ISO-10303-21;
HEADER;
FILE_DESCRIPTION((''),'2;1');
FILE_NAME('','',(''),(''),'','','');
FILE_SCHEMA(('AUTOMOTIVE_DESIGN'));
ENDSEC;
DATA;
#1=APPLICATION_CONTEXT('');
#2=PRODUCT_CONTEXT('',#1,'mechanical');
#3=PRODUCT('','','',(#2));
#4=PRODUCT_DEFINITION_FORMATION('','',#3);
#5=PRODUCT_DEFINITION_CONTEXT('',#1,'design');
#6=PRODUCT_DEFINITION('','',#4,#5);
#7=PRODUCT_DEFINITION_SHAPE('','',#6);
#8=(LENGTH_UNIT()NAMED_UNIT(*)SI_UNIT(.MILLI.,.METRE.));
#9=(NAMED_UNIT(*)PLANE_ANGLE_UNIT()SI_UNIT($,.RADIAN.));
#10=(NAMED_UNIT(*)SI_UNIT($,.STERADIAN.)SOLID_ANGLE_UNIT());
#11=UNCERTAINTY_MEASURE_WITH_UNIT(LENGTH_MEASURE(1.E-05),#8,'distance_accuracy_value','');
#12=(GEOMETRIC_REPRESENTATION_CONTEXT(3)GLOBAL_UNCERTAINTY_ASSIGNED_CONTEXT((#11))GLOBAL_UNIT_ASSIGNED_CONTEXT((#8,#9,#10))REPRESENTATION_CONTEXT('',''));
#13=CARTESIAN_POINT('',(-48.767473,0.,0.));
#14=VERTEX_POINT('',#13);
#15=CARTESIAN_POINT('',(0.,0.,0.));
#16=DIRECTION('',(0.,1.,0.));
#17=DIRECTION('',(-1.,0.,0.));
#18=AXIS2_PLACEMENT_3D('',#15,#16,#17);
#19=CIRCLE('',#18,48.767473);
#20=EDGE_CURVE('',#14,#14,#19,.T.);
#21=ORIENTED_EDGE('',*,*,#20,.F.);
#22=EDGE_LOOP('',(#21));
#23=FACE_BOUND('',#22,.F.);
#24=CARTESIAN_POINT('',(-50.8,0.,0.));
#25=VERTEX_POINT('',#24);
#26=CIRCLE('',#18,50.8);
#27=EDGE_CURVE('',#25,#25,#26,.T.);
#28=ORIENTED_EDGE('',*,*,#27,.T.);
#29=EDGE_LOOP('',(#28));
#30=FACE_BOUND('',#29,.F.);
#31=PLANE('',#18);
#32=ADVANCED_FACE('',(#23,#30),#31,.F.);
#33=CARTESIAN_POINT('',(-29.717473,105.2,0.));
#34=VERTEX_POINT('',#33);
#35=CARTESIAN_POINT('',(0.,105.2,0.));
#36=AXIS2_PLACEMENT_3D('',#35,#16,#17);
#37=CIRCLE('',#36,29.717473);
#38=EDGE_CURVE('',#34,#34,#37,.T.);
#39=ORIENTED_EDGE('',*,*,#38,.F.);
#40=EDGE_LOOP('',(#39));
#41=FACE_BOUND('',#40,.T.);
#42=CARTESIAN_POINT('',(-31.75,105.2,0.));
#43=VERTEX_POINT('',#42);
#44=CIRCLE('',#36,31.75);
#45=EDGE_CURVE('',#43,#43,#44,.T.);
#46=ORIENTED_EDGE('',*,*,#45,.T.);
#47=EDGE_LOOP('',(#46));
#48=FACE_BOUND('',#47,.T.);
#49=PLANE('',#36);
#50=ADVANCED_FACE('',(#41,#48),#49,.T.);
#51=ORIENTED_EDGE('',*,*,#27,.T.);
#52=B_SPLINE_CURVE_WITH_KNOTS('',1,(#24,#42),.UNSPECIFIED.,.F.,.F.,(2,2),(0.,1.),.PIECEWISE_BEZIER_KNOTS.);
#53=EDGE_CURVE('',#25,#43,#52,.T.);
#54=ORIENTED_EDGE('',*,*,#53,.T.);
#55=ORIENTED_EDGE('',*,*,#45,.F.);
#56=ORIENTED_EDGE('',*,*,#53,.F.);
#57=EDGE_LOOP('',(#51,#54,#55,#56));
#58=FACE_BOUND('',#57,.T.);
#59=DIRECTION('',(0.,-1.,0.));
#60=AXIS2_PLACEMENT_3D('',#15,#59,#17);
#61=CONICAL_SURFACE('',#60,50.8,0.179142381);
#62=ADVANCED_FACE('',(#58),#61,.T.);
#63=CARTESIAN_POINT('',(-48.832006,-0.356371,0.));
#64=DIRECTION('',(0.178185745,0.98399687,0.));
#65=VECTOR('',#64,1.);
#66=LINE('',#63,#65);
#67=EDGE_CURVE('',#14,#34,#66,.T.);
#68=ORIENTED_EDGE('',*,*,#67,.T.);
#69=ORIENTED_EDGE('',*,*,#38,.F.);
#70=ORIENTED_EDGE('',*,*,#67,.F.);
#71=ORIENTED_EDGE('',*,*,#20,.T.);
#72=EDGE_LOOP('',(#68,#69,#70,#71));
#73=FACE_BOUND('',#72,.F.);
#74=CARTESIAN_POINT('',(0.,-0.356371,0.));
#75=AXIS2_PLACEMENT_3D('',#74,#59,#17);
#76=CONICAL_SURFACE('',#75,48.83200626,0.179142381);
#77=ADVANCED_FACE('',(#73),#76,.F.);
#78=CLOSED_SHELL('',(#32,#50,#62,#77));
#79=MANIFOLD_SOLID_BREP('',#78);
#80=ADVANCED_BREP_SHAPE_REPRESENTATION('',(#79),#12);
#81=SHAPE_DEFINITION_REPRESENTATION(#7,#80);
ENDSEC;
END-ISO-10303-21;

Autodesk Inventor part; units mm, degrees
ref_plane "YZ Plane" through (0, 0, 0) normal (1, 0, 0) x (0, 1, 0)
ref_plane "XY Plane" through (0, 0, 0) normal (0, 0, 1) x (1, 0, 0)
sketch "Szkic6" plane through (0, 0, 0) normal (0, 1, 0) x (-1, 0, 0)
  circle A0 centre (0, 0) radius 50.8
  dimension "d33" = 101.6
ref_plane "Płaszczyzna konstrukcyjna1" through (0, 105.2, 0) normal (0, 1, 0) x (-1, 0, 0)
sketch "Szkic7" plane through (0, 105.2, 0) normal (0, 1, 0) x (-1, 0, 0)
  circle A0 centre (0, 0) radius 31.75
  dimension "d35" = 63.5
loft "Wyciągnięcie złożone1" add profiles "Szkic6", "Szkic7"
shell "Skorupa1" thickness 2 removed faces 2 at (14.3997, 105.2, 5.5289) at (7.3018, 0, 11.5135)
equation "\"d33\" = OD1"
equation "\"d35\" = OD2"
equation "\"d52\" = THK"
equation "\"SzerokośćGięciaPodcięcia\" = Grubość"
equation "\"RozmiarPodcięciaNarożnika\" = 4 * Grubość"
equation "\"PromieńPrzejścia\" = PromieńGięcia"
equation "\"Rozmiar_promienia_Jacobiego\" = PromieńGięcia"
equation "\"Wielk_odstępu\" = Grubość"
equation "\"d2\" = PromieńGięcia"
equation "\"d23\" = PromieńGięcia"
equation "\"OD1\" = 101.6"
equation "\"OD2\" = 63.5"
equation "\"L\" = 105.2"
equation "\"THK\" = 2"
equation "\"d34\" = L"
equation "\"Grubość\" = 1.5"
equation "\"PromieńGięcia\" = 3"
properties part number "Redukcja symetryczna Ø101,6x63,5x2 L=105,2" material "304"
